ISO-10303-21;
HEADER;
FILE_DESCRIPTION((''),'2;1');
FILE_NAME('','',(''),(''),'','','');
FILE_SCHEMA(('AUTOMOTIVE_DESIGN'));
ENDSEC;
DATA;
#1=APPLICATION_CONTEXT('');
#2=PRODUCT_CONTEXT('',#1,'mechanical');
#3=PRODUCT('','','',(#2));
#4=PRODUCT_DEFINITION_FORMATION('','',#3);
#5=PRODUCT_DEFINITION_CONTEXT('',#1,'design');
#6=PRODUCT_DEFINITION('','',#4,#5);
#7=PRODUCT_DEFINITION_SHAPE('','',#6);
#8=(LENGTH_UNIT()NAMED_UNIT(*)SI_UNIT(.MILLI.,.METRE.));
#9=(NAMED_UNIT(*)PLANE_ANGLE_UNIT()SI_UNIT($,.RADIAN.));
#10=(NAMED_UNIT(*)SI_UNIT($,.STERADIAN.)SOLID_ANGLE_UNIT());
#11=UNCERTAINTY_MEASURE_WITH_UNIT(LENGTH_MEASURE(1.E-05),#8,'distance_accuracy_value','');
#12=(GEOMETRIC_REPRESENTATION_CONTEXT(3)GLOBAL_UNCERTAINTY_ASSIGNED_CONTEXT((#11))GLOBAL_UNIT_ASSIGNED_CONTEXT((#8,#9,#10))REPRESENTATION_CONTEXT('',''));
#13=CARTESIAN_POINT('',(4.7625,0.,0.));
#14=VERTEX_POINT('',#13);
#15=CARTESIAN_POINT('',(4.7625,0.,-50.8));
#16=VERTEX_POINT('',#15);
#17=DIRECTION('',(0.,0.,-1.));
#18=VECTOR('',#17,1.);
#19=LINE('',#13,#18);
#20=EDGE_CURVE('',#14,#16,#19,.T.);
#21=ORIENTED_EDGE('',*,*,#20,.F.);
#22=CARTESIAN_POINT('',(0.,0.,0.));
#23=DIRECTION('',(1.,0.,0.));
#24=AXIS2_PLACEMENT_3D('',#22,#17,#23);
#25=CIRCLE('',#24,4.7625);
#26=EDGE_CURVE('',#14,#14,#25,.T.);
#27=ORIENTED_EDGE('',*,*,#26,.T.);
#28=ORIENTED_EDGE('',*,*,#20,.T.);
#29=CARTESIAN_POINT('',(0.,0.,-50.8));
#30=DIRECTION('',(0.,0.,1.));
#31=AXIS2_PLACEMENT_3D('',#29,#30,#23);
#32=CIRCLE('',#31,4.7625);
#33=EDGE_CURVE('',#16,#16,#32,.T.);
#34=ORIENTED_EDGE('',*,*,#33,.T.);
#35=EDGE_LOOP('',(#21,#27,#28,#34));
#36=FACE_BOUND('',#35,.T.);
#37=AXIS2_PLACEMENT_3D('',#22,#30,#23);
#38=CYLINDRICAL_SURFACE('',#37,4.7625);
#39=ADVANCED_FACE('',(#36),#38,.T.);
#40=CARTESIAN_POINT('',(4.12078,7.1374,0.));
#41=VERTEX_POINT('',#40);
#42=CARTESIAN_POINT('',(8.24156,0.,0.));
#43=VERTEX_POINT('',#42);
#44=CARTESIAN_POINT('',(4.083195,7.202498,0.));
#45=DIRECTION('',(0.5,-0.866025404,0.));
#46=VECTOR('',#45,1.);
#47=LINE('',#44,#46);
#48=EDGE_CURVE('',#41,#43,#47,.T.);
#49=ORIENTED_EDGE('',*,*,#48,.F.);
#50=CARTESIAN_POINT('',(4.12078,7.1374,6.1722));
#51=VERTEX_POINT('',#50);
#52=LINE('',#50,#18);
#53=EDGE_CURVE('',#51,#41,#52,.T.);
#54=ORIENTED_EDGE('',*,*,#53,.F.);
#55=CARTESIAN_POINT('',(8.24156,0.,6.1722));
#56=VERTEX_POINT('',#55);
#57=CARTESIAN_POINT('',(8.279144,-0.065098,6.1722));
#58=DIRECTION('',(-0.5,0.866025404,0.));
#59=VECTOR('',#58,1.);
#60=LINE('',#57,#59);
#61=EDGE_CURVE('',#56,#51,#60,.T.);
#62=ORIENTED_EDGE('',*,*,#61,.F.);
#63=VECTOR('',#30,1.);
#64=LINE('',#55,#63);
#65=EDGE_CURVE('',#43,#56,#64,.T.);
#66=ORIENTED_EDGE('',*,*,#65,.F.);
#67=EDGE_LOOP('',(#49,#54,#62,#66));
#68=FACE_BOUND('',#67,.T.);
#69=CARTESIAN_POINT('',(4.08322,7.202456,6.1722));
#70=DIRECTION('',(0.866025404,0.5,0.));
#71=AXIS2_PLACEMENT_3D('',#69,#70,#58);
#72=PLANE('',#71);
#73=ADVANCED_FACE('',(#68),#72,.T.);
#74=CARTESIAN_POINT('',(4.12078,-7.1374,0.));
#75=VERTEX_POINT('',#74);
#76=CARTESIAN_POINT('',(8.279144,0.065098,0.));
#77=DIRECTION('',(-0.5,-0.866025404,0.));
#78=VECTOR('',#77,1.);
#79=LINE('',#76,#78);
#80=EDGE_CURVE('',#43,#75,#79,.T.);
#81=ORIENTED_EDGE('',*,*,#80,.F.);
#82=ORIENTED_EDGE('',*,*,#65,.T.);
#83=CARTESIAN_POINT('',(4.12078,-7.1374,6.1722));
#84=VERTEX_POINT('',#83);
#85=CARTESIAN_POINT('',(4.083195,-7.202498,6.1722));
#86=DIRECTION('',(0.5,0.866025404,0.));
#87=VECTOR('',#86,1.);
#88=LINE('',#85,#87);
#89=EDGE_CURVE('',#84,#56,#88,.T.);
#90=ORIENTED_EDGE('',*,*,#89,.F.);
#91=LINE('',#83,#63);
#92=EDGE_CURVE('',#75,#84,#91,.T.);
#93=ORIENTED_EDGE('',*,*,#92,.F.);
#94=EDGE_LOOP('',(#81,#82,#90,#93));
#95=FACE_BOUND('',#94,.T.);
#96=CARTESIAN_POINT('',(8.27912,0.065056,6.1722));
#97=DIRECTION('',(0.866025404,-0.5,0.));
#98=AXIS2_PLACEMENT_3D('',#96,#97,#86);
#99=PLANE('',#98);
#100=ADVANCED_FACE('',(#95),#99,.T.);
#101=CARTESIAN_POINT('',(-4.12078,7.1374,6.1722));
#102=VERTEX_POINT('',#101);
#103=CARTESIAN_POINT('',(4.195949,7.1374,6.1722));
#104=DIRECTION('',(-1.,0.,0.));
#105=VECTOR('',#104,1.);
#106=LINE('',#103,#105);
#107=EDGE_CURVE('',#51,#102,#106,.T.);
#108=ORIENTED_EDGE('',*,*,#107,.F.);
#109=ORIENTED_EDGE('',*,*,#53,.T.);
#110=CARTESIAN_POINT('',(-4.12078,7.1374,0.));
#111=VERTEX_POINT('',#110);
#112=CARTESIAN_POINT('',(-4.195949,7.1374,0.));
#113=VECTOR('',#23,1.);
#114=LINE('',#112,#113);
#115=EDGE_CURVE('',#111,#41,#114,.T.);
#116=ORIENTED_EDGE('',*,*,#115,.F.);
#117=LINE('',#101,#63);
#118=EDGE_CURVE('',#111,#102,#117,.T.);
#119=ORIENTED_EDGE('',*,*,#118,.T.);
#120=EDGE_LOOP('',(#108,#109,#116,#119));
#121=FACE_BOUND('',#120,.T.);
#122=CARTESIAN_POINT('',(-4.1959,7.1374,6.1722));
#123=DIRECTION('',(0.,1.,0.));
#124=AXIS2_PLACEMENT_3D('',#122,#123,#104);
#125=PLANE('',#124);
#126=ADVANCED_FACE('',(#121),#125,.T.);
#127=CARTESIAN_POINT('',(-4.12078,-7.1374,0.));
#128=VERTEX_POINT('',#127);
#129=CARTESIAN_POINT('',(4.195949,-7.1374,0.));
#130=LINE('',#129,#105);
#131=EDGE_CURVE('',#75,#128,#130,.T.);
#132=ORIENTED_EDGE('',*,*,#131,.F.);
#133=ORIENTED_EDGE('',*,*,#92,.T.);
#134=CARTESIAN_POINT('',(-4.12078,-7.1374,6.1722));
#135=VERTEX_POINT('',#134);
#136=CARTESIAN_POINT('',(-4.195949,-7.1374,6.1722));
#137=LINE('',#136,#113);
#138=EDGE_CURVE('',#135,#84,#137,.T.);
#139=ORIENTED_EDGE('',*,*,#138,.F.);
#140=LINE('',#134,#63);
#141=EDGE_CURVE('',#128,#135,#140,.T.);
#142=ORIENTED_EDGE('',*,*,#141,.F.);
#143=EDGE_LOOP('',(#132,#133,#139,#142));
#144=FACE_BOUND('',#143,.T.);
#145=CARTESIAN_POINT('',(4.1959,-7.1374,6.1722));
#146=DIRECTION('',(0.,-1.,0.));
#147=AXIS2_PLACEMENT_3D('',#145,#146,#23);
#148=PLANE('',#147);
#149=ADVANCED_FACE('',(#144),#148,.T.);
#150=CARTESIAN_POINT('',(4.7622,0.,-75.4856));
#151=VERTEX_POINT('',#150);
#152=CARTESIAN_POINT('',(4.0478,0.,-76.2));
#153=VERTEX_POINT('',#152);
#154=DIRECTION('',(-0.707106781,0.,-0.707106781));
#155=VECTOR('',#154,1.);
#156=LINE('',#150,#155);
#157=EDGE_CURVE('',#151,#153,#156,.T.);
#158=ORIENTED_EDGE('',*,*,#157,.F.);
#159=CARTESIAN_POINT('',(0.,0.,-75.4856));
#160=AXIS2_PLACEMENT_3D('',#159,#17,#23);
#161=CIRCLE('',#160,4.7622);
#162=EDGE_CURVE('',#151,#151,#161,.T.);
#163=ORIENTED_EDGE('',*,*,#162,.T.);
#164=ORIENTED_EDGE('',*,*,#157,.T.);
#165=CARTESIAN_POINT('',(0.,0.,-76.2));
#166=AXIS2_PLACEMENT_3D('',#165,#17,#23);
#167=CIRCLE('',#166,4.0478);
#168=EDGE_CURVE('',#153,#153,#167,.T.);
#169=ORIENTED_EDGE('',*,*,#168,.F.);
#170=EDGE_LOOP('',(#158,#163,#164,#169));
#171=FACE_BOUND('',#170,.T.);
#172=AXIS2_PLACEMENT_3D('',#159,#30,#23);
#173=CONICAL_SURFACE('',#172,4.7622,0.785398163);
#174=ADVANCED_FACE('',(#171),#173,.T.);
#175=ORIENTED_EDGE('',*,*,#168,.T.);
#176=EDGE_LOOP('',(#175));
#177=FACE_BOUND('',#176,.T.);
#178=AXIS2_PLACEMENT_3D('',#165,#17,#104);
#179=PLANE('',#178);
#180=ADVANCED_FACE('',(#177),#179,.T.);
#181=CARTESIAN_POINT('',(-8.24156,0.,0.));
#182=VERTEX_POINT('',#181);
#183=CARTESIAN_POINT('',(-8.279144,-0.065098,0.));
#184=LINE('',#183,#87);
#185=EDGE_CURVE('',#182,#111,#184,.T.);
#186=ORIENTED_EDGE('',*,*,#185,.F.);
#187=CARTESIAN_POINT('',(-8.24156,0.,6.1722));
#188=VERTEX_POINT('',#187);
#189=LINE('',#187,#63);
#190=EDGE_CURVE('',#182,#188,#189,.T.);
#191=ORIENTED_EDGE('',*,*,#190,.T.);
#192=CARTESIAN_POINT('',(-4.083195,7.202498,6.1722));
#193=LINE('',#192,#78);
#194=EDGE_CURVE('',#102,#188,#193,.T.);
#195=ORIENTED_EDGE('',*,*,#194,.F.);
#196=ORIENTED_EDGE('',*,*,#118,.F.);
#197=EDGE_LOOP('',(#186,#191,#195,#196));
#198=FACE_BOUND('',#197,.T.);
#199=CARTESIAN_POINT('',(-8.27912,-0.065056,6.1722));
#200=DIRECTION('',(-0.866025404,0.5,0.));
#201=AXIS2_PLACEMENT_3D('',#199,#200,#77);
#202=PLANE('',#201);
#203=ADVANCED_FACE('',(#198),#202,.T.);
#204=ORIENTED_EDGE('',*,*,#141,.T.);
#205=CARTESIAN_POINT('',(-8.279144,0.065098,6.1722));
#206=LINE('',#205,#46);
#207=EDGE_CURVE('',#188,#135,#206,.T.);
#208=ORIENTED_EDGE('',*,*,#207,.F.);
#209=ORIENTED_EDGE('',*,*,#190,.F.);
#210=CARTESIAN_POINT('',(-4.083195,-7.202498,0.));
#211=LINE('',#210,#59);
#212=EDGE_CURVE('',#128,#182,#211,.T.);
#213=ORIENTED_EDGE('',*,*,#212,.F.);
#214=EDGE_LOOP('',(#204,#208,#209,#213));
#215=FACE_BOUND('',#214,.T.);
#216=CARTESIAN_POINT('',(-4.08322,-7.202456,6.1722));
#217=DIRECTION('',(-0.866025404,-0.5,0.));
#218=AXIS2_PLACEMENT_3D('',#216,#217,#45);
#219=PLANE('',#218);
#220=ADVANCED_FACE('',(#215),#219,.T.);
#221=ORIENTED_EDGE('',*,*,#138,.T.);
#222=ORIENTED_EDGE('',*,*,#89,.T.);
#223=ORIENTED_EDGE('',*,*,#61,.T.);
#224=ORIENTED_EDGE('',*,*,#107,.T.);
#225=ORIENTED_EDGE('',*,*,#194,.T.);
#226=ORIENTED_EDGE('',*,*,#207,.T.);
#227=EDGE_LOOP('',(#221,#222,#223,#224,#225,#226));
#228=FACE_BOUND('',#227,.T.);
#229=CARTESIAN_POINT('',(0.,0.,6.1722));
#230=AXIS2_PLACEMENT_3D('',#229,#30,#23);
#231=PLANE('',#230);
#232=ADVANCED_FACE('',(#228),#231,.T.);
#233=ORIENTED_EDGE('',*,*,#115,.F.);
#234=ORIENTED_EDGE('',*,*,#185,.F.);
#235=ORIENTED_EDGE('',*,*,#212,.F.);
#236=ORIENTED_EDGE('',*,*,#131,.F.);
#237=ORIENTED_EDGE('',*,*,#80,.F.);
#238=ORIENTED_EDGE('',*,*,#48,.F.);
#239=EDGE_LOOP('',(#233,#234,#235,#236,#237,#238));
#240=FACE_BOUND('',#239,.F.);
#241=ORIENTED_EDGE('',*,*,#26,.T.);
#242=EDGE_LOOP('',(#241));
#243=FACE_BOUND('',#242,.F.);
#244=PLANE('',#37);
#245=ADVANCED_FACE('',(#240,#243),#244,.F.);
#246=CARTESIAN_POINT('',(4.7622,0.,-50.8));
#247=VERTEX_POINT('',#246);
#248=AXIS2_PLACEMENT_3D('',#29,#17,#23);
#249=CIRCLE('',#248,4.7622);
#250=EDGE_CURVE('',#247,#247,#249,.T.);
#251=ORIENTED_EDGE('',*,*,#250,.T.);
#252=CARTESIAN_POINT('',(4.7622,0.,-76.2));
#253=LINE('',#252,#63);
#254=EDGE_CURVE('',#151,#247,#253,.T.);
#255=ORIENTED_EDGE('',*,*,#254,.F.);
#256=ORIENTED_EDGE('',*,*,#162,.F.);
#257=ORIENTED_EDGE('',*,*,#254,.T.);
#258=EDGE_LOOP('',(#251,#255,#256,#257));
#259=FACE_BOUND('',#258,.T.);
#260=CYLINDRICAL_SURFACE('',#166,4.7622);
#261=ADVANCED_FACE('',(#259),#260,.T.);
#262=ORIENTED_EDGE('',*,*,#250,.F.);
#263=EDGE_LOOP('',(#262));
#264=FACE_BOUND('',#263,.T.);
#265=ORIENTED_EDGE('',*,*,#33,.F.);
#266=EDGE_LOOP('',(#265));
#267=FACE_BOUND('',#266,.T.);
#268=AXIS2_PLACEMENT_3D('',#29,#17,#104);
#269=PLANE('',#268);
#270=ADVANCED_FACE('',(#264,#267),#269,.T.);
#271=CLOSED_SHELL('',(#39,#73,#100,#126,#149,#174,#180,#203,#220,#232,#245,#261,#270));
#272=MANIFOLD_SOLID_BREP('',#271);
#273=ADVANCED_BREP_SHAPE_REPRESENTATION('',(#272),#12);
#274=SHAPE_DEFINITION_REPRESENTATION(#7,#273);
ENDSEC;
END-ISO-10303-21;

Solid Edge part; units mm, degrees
sketch "Sketch1" plane through (0, 0, 0) normal (0, 0, 1) x (1, 0, 0)
  circle A0 centre (0, 0) radius 8.2794
  dimension "D1" = 16.5588
extrude "Protrusion1" add sketch "Sketch1" along normal blind 6.1722
sketch "Sketch2" plane through (0, 0, 0) normal (0, 0, -1) x (1, 0, 0)
  circle A0 centre (0, 0) radius 4.7625
extrude "Protrusion2" add sketch "Sketch2" along normal blind 76.2
sketch "Sketch3" plane through (0, 0, -76.2) normal (0, 0, -1) x (1, 0, 0)
  circle A0 centre (0, 0) radius 4.7622
extrude "Cutout1" cut sketch "Sketch3" against normal blind 25.4 flip side to cut
chamfer "Chamfer_1" distance 0.7144 angle 45 1 edges at (-4.7622, 0, -76.2)
sketch "Sketch4" plane through (0, 0, 6.1722) normal (0, 0, 1) x (1, 0, 0)
  line L0 (-4.1959, 7.1374) -> (4.1959, 7.1374)
  dimension "D1" = 14.2748
extrude "Cutout2" cut sketch "Sketch4" against normal up to next material side at (0, 7.1874, 6.1722)
pattern_circular "Pattern1" count 6 over 360 about axis through (0, 0, 6.1722) along (0, 0, 1) of "Cutout2"
properties part number "107691"
